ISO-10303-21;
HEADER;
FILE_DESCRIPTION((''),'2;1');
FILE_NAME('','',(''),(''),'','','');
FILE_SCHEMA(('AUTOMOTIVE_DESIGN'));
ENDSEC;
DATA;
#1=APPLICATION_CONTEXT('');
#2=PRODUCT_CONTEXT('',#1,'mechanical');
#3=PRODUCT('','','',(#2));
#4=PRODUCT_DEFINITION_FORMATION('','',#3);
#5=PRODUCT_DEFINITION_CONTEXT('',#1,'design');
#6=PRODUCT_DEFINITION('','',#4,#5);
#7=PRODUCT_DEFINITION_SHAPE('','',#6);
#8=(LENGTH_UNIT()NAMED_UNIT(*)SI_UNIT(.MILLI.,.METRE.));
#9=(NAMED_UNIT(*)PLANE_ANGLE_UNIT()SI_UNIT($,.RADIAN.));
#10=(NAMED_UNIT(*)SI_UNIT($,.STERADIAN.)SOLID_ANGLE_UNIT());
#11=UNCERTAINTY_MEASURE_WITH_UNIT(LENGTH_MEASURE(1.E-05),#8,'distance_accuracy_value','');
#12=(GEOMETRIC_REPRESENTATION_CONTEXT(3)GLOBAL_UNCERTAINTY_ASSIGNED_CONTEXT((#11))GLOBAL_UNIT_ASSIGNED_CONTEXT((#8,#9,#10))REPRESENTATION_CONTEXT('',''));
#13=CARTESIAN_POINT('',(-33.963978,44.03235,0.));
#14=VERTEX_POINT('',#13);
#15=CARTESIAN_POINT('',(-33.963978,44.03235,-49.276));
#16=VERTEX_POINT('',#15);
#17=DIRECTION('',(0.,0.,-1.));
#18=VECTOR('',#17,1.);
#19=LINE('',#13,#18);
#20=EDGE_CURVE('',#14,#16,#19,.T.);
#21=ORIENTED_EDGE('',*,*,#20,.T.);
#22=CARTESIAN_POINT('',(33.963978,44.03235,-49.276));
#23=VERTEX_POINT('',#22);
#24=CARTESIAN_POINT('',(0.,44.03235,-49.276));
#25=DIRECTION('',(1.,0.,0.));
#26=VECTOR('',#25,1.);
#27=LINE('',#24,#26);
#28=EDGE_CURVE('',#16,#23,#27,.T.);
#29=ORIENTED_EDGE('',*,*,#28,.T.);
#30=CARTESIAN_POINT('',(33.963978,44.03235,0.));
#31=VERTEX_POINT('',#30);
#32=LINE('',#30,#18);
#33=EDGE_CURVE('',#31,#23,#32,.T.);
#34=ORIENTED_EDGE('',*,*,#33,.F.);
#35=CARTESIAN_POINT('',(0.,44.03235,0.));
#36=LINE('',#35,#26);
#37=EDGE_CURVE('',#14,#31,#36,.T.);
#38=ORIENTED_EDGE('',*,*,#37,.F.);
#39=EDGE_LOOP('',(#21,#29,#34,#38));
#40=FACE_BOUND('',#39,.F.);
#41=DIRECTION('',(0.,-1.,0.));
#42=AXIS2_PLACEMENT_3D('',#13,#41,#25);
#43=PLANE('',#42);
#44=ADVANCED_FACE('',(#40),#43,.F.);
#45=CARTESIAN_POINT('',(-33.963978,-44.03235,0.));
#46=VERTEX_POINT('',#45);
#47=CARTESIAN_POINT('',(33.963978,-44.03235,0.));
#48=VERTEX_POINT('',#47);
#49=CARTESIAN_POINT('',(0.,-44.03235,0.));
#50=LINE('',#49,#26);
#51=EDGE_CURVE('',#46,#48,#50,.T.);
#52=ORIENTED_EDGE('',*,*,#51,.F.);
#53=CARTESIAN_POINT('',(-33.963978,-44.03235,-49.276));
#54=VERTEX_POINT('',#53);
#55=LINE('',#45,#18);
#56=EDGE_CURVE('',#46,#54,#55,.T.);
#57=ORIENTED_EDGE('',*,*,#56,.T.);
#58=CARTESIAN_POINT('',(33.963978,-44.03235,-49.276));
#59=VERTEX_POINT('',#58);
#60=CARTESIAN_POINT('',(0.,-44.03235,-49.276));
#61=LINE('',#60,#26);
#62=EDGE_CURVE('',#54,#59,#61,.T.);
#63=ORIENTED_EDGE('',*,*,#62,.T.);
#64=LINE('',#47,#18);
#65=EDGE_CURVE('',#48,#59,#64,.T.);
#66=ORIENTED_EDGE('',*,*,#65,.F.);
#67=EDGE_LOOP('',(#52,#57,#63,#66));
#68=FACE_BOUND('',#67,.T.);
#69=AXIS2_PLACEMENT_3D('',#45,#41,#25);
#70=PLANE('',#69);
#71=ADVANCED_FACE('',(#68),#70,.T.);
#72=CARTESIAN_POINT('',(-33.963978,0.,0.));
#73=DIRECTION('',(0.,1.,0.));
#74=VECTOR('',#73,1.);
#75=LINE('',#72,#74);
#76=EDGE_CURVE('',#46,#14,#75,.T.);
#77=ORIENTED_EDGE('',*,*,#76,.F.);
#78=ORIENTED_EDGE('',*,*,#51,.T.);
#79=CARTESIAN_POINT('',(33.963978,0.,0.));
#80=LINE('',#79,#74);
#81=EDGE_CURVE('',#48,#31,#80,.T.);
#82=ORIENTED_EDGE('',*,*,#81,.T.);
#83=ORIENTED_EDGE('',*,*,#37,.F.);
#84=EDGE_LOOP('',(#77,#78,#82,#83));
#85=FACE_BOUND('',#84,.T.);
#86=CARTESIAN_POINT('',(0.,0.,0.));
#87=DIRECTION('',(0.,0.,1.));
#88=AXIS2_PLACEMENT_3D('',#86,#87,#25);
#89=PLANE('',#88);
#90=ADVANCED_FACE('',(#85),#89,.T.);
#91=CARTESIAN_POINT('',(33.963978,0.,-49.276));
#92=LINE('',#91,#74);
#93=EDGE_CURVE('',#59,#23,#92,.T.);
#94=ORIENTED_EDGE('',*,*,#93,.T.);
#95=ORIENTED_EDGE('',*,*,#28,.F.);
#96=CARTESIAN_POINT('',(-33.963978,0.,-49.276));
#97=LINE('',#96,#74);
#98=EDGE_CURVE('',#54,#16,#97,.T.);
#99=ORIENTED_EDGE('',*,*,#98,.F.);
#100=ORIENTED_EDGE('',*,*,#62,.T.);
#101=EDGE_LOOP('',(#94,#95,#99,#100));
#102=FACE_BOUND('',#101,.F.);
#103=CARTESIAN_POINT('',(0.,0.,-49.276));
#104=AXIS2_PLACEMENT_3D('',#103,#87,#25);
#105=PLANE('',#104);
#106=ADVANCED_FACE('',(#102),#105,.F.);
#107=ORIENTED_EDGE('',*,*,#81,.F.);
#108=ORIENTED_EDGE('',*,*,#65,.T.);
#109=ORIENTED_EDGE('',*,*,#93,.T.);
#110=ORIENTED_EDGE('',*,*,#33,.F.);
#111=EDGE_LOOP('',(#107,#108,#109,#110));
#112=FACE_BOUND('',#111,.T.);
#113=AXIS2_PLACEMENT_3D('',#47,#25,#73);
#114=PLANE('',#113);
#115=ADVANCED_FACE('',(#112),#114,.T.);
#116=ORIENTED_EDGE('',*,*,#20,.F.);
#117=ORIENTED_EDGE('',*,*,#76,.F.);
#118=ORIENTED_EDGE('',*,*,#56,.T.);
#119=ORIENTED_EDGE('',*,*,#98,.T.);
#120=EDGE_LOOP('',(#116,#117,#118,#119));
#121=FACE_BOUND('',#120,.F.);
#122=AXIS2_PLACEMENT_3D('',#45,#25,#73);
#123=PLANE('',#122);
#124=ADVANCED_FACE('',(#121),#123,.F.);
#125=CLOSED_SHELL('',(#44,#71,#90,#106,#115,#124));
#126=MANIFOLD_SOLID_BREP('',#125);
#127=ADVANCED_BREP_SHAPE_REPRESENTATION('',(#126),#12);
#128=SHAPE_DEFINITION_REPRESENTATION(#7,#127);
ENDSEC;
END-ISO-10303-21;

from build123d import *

# Parameters (mm, degrees)
F0_W     = 67.9279565811
F0_H     = 88.0647003651
F1_DEPTH = 49.276


# Not quite as in the source:
# - a feature of the source that left no trace in its solid (it failed there, or was rolled back) is left out


with BuildPart() as f1:
    # F0 (on Top) → F1 (new body)
    with BuildSketch(Plane.XY):
        Rectangle(F0_W, F0_H)
    extrude(amount=-F1_DEPTH)


solid = f1.part
